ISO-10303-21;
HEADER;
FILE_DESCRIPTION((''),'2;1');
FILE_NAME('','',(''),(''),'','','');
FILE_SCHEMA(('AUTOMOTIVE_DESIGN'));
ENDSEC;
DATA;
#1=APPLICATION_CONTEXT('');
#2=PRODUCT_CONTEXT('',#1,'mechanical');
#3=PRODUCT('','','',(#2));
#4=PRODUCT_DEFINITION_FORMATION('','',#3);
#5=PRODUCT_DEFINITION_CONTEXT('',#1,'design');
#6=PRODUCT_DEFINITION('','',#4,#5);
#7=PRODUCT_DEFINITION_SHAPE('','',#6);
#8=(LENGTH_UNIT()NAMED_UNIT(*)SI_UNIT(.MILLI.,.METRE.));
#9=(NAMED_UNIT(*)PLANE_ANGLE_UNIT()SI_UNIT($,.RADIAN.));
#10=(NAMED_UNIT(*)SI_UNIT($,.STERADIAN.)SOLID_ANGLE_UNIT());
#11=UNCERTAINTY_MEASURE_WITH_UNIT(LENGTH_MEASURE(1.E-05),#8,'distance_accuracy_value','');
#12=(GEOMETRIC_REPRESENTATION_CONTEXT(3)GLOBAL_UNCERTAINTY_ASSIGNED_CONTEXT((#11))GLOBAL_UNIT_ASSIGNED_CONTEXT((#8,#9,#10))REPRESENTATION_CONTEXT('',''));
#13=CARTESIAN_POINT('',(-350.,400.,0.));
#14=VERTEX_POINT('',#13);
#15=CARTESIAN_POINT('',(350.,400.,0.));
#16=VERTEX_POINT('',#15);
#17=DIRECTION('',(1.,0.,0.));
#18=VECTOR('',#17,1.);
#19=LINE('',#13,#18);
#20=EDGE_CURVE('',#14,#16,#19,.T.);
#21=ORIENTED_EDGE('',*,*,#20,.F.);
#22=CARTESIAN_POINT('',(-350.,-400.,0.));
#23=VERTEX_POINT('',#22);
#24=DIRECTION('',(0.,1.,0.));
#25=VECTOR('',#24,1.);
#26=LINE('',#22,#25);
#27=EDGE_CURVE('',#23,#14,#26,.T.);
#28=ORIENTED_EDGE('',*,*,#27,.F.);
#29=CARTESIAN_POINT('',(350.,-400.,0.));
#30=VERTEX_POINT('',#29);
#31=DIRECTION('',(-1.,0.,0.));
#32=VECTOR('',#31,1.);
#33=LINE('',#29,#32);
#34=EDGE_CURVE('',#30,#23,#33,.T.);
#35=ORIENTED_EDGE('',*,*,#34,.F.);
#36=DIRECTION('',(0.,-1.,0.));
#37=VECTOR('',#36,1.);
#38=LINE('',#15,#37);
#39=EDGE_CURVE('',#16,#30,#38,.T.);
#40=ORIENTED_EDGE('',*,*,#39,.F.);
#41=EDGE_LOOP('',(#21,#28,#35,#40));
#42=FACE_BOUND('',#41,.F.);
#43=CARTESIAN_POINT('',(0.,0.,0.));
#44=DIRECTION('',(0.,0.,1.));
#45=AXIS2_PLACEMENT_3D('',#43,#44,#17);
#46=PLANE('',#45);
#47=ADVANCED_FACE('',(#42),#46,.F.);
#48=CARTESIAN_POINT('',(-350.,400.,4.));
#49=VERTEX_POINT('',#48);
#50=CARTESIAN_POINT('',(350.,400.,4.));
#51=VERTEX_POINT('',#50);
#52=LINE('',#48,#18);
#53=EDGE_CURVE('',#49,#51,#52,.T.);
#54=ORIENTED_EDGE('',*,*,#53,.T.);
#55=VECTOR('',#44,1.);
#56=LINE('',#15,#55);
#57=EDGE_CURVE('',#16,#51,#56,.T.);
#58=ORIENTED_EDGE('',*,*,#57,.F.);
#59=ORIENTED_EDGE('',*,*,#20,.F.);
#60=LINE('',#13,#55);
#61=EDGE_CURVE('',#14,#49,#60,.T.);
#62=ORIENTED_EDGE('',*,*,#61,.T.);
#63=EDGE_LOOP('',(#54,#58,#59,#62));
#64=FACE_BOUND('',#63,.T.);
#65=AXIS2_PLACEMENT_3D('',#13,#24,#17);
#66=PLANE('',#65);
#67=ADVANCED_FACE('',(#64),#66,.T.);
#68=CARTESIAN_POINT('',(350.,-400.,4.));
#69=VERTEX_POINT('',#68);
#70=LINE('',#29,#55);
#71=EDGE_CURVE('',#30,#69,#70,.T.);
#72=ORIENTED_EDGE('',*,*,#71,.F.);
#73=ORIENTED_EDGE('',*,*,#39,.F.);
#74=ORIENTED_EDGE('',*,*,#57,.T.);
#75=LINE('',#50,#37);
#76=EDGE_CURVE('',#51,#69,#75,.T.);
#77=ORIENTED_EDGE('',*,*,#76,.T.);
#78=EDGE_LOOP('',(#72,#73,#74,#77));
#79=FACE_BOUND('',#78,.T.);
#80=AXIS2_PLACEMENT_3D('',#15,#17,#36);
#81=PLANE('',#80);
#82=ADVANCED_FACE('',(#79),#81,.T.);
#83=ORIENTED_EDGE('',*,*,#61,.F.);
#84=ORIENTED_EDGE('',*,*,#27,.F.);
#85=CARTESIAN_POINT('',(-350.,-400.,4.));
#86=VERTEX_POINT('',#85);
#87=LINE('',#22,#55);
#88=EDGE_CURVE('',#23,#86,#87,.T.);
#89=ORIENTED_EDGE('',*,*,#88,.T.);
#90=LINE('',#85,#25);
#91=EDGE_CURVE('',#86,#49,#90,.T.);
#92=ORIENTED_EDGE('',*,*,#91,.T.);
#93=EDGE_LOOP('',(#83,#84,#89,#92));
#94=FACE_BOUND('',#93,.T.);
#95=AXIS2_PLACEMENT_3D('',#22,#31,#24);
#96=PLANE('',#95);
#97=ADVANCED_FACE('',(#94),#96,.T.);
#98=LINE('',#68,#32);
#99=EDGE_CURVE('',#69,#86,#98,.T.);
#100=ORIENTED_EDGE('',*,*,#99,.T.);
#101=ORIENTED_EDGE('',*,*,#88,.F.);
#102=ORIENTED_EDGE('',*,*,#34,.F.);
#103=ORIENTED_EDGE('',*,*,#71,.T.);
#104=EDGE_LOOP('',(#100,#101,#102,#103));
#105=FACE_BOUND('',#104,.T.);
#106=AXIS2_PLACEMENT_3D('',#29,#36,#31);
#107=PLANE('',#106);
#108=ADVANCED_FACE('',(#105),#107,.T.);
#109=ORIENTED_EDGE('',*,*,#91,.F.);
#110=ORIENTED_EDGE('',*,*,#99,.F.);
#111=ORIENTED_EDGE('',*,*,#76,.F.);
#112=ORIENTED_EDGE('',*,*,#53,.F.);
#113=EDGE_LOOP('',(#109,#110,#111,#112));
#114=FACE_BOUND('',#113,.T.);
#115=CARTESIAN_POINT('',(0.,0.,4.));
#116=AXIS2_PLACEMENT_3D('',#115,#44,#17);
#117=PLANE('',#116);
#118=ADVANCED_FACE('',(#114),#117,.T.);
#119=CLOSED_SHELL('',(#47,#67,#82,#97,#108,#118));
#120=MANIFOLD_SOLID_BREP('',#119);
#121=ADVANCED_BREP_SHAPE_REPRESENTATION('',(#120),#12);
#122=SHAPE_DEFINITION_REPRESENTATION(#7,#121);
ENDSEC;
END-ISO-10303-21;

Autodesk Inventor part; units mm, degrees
ref_plane "YZ Plane" through (0, 0, 0) normal (1, 0, 0) x (0, 1, 0)
ref_plane "XZ Plane" through (0, 0, 0) normal (0, 1, 0) x (-1, 0, 0)
ref_plane "XY Plane" through (0, 0, 0) normal (0, 0, 1) x (1, 0, 0)
sketch "Sketch1" plane through (0, 0, 0) normal (0, 0, 1) x (1, 0, 0)
  line L0 (350, -400) -> (-350, -400)
  line L1 (-350, -400) -> (-350, 400)
  line L2 (-350, 400) -> (350, 400)
  line L3 (350, 400) -> (350, -400)
  line L4 (350, -400) -> (-350, 400) construction
  line L5 (-350, -400) -> (350, 400) construction
  point P0 (0, 0)
  dimension "d0" = 700
  dimension "d1" = 800
extrude "Plate1" add sketch "Sketch1" along normal blind 4
sketch "Sketch3" plane through (0, 0, 0) normal (0, 0, -1) x (-1, 0, 0)
  line L0 (-738.6395, 5.6667) -> (-680, 5.6667) projected
  line L1 (206.0719, 366.8104) -> (206.0719, 4.8587) construction
  line L2 (206.0719, 4.8587) -> (120.9163, 4.8587) construction
  line L3 (120.9163, 4.8587) -> (120.9163, 366.8104) construction
  line L4 (120.9163, 366.8104) -> (206.0719, 366.8104) construction
  ellipse E0 centre (299.5394, 398) end of major axis (299.5394, 428) minor radius 0.3401 (299.5394, 368) -> (299.8795, 398) ccw projected
  line L5 (299.5394, 368) -> (295.5396, 368) projected
  line L6 (319.9499, 156.8333) -> (350.29, 156.8333) projected
  line L7 (319.9499, 156.8333) -> (319.9499, 160.8333) projected
  line L8 (319.9499, -339.8333) -> (350.29, -339.8333) projected
  line L9 (319.9499, -339.8333) -> (319.9499, -335.8333) projected
  line L10 (295.5396, -400) -> (295.5396, -343.3333) projected
  line L11 (-204.4962, -400) -> (-204.4962, -343.3333) projected
  line L12 (-349.3197, -339.8333) -> (-290, -339.8333) projected
  line L13 (-290, -339.8333) -> (-290, -335.8333) projected
  line L14 (-349.3197, 156.8333) -> (-290, 156.8333) projected
  line L15 (-290, 156.8333) -> (-290, 160.8333) projected
  ellipse E1 centre (-200.4965, 398) end of major axis (-200.4965, 428) minor radius 0.3401 (-200.4965, 368) -> (-200.1564, 398) ccw projected
  line L16 (-200.4965, 368) -> (-204.4962, 368) projected
  point P0 (0, 0)
mark "Mark2"
equation "\"d2\" = Thickness"
equation "\"BendRadius\" = Thickness"
equation "\"BendReliefWidth\" = Thickness"
equation "\"BendReliefDepth\" = 0.5 * Thickness"
equation "\"CornerReliefSize\" = 4 * Thickness"
equation "\"MinimumRemnant\" = 2 * Thickness"
equation "\"TransitionRadius\" = BendRadius"
equation "\"JacobiRadiusSize\" = BendRadius"
equation "\"GapSize\" = Thickness"
equation "\"Thickness\" = 4"
properties part number "GBK 1111 shield 1_Dummy" material "Steel"
